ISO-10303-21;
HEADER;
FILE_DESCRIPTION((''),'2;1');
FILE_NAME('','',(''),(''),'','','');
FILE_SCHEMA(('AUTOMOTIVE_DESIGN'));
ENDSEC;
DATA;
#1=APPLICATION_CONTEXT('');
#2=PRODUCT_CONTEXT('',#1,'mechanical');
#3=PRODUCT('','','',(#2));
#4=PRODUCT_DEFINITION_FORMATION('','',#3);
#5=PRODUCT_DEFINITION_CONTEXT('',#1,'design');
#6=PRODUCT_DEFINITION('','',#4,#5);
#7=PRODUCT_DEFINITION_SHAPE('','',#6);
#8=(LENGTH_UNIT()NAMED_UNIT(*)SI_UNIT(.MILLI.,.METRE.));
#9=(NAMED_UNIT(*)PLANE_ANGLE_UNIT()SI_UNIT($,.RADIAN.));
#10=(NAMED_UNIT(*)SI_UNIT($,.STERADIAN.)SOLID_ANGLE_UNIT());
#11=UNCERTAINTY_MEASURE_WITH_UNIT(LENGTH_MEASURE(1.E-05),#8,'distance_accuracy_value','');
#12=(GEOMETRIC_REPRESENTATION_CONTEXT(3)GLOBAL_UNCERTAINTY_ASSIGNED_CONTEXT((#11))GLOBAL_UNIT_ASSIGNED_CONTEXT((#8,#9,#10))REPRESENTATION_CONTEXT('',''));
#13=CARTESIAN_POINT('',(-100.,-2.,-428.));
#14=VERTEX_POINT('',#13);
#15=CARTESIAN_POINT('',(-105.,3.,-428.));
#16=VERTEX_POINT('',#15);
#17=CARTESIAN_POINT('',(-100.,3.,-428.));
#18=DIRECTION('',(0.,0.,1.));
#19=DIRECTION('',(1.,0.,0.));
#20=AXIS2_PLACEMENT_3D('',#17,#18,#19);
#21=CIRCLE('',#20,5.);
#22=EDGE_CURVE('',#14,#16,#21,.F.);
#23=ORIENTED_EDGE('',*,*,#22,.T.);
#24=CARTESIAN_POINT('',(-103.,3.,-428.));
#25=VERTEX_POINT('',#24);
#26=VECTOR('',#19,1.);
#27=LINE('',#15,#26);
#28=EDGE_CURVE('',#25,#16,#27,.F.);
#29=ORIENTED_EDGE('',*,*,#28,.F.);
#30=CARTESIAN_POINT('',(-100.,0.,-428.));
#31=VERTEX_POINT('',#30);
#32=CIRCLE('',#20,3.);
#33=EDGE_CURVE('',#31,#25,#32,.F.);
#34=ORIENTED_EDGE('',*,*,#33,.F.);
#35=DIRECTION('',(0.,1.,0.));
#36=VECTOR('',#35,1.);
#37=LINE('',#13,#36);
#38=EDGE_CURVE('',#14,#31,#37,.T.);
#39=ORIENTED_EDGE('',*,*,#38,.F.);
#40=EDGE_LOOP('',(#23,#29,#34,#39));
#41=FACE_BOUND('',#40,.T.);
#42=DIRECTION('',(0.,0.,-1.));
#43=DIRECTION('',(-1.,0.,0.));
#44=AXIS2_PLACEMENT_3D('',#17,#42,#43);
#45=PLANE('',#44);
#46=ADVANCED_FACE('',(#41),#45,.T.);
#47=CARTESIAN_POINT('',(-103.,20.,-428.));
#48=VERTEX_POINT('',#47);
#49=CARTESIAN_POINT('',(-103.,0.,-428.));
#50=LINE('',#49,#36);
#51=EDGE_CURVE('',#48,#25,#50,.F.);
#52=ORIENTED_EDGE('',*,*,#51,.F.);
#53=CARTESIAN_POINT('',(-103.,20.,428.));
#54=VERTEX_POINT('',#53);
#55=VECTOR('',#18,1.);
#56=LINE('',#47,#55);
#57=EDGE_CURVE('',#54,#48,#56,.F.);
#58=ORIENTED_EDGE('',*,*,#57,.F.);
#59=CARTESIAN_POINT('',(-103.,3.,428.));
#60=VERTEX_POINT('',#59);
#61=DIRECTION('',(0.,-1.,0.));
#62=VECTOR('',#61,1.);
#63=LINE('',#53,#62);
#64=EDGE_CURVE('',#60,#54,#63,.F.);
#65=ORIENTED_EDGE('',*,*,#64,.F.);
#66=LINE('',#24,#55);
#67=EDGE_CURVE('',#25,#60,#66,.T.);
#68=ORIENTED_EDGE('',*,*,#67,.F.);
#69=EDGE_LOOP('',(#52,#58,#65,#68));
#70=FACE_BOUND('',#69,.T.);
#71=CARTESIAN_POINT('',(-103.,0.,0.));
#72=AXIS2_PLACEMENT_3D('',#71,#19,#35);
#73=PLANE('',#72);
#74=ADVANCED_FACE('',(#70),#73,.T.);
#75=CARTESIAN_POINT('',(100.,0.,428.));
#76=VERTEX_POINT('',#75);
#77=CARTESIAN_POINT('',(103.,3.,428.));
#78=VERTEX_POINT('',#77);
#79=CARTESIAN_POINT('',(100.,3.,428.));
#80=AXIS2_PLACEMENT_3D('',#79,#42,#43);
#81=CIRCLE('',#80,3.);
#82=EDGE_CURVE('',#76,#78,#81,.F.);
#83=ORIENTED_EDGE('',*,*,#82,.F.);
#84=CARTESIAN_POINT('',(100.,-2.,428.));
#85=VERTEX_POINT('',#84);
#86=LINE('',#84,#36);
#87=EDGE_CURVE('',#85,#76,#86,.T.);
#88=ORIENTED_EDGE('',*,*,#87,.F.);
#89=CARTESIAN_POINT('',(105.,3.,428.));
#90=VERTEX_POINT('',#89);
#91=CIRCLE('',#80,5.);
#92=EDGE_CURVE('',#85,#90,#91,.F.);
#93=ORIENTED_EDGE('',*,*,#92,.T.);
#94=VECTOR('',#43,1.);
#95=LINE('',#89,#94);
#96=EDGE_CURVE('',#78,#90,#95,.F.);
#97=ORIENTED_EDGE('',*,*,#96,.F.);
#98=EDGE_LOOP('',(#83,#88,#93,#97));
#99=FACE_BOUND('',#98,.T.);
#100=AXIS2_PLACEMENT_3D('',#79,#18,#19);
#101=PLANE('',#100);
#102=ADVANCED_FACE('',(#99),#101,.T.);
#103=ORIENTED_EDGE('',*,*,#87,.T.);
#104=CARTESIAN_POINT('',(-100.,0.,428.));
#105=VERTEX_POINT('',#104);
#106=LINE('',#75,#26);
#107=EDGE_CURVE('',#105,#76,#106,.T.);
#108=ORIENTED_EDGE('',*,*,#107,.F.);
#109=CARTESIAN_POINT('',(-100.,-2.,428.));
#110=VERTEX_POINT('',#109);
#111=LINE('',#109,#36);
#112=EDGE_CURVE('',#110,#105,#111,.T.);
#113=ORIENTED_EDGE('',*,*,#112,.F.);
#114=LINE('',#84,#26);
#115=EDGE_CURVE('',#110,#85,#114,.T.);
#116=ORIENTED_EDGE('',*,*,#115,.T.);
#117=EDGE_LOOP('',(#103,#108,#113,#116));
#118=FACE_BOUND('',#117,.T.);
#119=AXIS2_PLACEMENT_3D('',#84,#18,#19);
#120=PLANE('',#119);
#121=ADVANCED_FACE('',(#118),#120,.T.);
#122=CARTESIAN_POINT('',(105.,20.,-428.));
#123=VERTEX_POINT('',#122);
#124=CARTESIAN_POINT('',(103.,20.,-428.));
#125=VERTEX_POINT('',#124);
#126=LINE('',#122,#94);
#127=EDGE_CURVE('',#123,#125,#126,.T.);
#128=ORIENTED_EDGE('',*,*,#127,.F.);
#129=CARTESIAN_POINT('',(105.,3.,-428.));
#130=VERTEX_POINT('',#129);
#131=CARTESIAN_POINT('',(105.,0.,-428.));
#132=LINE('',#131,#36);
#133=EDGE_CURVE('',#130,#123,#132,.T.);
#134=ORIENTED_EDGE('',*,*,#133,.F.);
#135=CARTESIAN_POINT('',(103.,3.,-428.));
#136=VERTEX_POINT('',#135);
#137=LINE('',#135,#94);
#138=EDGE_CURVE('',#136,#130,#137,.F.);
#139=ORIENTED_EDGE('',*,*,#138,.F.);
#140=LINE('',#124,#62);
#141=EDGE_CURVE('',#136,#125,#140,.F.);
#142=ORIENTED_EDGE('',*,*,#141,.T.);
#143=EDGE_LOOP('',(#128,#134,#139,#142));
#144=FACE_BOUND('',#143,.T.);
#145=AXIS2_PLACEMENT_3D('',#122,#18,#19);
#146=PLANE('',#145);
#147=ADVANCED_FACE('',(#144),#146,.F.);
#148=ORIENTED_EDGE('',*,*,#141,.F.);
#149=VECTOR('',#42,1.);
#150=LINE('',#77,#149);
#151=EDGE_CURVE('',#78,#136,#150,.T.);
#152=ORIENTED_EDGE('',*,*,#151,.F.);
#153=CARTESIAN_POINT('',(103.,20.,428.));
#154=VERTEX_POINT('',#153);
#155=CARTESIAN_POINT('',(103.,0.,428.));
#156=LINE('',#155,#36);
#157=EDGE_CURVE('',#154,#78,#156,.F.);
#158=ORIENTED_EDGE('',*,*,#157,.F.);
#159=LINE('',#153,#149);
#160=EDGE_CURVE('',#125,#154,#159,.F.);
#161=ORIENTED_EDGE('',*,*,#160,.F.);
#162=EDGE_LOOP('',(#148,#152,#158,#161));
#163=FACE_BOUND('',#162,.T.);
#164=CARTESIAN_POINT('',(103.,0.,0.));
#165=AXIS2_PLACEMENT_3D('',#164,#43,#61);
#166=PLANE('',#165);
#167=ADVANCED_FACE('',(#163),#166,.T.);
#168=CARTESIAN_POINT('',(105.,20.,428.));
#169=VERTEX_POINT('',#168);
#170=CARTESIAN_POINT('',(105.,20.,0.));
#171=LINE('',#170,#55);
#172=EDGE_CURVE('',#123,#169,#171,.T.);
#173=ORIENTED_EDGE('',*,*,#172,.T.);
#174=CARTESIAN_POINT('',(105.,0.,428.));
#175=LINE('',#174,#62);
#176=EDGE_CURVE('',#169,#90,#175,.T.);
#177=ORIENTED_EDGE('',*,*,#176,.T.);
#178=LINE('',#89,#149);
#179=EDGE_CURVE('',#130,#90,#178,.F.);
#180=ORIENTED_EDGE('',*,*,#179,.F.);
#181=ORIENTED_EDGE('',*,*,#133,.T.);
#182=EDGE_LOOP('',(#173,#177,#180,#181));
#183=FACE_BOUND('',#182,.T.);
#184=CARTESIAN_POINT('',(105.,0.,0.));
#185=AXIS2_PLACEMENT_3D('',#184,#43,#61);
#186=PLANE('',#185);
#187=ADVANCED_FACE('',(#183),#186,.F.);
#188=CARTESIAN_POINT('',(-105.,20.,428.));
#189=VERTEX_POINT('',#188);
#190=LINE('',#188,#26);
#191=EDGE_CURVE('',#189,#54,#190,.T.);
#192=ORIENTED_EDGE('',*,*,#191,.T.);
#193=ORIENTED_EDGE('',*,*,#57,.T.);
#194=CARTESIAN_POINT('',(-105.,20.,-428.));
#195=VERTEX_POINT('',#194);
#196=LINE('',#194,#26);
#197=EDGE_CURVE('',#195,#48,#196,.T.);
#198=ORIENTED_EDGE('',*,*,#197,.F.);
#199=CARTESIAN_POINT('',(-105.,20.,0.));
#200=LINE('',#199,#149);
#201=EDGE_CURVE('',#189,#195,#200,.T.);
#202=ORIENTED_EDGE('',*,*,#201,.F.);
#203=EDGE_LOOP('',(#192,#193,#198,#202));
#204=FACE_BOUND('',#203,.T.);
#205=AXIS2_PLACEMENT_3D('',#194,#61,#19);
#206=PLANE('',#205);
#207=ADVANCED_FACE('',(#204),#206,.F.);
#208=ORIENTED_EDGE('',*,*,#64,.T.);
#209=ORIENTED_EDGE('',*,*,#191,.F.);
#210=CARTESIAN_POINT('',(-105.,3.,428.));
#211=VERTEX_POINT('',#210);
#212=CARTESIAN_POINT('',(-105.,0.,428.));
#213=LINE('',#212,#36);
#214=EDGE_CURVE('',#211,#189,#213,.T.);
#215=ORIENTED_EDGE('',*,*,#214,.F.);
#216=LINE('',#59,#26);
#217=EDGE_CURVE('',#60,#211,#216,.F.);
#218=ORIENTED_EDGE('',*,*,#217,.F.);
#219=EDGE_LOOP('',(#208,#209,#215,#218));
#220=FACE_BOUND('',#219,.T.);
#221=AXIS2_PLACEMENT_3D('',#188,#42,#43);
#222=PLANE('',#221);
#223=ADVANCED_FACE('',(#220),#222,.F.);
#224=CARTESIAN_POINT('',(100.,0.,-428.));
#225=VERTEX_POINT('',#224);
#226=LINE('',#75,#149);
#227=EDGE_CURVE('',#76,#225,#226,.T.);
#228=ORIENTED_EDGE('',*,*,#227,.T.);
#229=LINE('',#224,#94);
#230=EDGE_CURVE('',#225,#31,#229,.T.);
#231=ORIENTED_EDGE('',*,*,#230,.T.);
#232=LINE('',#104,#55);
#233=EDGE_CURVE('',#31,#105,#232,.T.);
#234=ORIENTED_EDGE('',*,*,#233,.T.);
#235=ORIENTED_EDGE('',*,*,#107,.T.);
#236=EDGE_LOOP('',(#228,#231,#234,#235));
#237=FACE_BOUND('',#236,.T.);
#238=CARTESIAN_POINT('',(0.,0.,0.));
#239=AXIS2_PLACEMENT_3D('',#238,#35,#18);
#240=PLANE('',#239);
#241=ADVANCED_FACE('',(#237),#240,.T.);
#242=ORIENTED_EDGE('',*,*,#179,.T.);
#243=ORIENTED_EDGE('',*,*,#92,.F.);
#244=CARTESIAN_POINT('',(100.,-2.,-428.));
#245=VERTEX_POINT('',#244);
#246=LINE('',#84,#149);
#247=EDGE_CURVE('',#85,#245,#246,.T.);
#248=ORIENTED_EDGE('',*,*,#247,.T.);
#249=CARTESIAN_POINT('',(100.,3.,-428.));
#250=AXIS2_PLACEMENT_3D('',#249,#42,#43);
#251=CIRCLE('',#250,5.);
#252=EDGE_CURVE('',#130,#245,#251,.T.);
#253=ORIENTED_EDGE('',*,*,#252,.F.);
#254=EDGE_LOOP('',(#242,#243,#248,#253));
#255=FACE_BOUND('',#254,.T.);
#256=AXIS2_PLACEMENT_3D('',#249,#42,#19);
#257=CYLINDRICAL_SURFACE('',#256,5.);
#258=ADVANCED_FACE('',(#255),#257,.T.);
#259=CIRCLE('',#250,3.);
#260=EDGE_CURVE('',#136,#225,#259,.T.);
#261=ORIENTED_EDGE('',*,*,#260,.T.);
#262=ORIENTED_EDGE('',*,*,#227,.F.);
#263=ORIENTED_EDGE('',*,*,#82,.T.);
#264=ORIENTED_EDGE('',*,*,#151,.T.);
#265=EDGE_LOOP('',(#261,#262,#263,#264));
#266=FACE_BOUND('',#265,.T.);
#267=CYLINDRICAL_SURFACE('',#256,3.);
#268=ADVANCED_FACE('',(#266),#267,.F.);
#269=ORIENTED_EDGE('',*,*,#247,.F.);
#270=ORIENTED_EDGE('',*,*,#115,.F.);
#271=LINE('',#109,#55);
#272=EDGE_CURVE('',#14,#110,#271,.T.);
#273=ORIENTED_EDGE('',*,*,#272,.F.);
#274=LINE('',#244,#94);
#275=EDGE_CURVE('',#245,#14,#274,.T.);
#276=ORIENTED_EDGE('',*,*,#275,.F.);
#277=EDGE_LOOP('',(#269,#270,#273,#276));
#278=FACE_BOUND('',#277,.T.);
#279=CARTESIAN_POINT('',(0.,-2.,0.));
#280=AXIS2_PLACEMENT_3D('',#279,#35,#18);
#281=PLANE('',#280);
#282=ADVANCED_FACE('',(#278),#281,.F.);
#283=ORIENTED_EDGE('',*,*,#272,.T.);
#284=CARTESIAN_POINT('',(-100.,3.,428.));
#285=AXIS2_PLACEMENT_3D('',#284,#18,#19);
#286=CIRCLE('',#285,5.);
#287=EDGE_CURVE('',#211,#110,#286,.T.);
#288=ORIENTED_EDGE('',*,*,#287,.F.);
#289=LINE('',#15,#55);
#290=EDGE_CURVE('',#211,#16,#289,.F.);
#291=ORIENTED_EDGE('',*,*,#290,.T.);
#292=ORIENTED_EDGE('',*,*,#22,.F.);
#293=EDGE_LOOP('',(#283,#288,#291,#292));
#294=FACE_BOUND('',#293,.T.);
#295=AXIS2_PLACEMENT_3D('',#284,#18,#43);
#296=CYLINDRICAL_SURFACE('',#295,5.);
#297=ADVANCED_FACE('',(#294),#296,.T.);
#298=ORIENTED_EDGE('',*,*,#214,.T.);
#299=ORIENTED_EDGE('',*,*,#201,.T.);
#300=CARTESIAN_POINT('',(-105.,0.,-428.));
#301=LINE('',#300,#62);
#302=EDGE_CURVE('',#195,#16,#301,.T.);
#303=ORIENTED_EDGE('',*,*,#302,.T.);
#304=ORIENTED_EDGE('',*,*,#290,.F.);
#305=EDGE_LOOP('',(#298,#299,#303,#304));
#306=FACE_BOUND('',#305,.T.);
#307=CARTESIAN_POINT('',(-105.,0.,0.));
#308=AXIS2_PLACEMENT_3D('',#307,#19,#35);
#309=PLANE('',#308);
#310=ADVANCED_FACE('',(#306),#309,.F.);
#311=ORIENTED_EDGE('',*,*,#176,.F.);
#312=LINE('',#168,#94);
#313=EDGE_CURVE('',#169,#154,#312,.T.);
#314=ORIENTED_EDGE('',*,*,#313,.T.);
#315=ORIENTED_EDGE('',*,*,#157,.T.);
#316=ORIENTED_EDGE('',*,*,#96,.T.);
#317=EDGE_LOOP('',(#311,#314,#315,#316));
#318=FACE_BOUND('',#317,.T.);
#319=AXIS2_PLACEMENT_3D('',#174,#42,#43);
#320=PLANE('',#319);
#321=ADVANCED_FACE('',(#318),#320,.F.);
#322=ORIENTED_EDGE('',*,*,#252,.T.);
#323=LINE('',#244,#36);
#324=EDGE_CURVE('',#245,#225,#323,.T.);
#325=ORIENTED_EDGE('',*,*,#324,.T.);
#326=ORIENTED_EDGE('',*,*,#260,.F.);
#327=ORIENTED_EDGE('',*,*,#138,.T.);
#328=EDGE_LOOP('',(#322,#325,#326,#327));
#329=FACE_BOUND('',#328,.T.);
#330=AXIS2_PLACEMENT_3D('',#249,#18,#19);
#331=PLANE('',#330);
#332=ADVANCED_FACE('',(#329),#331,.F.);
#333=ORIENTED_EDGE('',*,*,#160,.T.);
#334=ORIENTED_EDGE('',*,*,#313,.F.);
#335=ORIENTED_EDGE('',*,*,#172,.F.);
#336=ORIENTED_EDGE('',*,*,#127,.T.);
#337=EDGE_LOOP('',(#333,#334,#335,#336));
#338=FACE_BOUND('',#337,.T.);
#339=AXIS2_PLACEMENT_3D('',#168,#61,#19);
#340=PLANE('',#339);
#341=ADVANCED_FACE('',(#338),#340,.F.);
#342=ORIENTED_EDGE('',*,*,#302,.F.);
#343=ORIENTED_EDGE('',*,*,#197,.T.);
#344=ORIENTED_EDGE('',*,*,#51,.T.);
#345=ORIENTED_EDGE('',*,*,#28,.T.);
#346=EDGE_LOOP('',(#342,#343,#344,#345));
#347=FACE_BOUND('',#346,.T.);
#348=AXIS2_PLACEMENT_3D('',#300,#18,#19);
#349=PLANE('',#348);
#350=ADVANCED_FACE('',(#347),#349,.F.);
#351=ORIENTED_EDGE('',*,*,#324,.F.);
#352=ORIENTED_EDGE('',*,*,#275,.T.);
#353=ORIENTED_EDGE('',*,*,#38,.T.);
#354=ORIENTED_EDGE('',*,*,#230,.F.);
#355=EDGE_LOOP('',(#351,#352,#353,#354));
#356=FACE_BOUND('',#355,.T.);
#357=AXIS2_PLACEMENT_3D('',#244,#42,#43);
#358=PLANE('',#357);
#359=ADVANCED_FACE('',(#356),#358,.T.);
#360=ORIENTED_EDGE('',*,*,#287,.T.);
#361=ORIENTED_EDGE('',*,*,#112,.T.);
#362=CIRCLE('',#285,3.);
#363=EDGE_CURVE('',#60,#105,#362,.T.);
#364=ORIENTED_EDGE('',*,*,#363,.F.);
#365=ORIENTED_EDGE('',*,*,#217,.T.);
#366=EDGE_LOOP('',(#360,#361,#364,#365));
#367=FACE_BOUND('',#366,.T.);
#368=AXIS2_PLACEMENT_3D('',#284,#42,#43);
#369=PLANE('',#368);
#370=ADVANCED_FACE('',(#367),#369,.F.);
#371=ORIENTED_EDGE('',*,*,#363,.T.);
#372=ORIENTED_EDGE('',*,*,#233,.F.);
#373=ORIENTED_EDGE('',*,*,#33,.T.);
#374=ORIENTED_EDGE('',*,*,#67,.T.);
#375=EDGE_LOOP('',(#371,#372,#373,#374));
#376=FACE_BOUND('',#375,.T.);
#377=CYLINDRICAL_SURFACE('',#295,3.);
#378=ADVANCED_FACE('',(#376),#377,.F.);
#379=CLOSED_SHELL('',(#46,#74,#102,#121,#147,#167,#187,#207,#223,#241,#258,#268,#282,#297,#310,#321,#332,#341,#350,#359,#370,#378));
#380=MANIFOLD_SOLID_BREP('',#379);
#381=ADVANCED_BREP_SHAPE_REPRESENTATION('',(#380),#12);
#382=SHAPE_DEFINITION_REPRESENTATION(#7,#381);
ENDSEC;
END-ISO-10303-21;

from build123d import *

# Parameters (mm, degrees)
SKETCH1_W               = 200
SKETCH1_H               = 856
BASE_FLANGE1_DEPTH      = 2
EDGE_FLANGE1_DEPTH      = 856
EDGE_FLANGE1_BEND_DEPTH = 856


# Sheet-metal steps are written as plain solids
with BuildPart() as part:
    # Sketch1 → Base-Flange1 (new body)
    with BuildSketch(Plane(origin=(0, 0, 0), x_dir=(1, 0, 0), z_dir=(0, 1, 0))):
        Rectangle(SKETCH1_W, SKETCH1_H)
    extrude(amount=-BASE_FLANGE1_DEPTH)

    # Edge-Flange1 section (across the edge) → Edge-Flange1 (add)
    with BuildSketch(Plane(origin=(103, 0, 428), x_dir=(-1, 0, 0), z_dir=(0, 0, -1))):
        with BuildLine():
            Line((-2, 3), (-2, 20))
            Line((-2, 20), (0, 20))
            Line((0, 20), (0, 3))
            ThreePointArc((0, 3), (0.878679656, 0.878679656), (3, 0))
            Line((3, 0), (3, -2))
            ThreePointArc((3, -2), (-0.535533906, -0.535533906), (-2, 3))
        make_face()
    extrude(amount=EDGE_FLANGE1_DEPTH)

    # Edge-Flange1 section 2 (across the edge) → Edge-Flange1 bend (add)
    with BuildSketch(Plane(origin=(-103, 0, -428), x_dir=(1, 0, 0), z_dir=(0, 0, 1))):
        with BuildLine():
            Line((-2, 3), (-2, 20))
            Line((-2, 20), (0, 20))
            Line((0, 20), (0, 3))
            ThreePointArc((0, 3), (0.878679656, 0.878679656), (3, 0))
            Line((3, 0), (3, -2))
            ThreePointArc((3, -2), (-0.535533906, -0.535533906), (-2, 3))
        make_face()
    extrude(amount=EDGE_FLANGE1_BEND_DEPTH)


solid = part.part
